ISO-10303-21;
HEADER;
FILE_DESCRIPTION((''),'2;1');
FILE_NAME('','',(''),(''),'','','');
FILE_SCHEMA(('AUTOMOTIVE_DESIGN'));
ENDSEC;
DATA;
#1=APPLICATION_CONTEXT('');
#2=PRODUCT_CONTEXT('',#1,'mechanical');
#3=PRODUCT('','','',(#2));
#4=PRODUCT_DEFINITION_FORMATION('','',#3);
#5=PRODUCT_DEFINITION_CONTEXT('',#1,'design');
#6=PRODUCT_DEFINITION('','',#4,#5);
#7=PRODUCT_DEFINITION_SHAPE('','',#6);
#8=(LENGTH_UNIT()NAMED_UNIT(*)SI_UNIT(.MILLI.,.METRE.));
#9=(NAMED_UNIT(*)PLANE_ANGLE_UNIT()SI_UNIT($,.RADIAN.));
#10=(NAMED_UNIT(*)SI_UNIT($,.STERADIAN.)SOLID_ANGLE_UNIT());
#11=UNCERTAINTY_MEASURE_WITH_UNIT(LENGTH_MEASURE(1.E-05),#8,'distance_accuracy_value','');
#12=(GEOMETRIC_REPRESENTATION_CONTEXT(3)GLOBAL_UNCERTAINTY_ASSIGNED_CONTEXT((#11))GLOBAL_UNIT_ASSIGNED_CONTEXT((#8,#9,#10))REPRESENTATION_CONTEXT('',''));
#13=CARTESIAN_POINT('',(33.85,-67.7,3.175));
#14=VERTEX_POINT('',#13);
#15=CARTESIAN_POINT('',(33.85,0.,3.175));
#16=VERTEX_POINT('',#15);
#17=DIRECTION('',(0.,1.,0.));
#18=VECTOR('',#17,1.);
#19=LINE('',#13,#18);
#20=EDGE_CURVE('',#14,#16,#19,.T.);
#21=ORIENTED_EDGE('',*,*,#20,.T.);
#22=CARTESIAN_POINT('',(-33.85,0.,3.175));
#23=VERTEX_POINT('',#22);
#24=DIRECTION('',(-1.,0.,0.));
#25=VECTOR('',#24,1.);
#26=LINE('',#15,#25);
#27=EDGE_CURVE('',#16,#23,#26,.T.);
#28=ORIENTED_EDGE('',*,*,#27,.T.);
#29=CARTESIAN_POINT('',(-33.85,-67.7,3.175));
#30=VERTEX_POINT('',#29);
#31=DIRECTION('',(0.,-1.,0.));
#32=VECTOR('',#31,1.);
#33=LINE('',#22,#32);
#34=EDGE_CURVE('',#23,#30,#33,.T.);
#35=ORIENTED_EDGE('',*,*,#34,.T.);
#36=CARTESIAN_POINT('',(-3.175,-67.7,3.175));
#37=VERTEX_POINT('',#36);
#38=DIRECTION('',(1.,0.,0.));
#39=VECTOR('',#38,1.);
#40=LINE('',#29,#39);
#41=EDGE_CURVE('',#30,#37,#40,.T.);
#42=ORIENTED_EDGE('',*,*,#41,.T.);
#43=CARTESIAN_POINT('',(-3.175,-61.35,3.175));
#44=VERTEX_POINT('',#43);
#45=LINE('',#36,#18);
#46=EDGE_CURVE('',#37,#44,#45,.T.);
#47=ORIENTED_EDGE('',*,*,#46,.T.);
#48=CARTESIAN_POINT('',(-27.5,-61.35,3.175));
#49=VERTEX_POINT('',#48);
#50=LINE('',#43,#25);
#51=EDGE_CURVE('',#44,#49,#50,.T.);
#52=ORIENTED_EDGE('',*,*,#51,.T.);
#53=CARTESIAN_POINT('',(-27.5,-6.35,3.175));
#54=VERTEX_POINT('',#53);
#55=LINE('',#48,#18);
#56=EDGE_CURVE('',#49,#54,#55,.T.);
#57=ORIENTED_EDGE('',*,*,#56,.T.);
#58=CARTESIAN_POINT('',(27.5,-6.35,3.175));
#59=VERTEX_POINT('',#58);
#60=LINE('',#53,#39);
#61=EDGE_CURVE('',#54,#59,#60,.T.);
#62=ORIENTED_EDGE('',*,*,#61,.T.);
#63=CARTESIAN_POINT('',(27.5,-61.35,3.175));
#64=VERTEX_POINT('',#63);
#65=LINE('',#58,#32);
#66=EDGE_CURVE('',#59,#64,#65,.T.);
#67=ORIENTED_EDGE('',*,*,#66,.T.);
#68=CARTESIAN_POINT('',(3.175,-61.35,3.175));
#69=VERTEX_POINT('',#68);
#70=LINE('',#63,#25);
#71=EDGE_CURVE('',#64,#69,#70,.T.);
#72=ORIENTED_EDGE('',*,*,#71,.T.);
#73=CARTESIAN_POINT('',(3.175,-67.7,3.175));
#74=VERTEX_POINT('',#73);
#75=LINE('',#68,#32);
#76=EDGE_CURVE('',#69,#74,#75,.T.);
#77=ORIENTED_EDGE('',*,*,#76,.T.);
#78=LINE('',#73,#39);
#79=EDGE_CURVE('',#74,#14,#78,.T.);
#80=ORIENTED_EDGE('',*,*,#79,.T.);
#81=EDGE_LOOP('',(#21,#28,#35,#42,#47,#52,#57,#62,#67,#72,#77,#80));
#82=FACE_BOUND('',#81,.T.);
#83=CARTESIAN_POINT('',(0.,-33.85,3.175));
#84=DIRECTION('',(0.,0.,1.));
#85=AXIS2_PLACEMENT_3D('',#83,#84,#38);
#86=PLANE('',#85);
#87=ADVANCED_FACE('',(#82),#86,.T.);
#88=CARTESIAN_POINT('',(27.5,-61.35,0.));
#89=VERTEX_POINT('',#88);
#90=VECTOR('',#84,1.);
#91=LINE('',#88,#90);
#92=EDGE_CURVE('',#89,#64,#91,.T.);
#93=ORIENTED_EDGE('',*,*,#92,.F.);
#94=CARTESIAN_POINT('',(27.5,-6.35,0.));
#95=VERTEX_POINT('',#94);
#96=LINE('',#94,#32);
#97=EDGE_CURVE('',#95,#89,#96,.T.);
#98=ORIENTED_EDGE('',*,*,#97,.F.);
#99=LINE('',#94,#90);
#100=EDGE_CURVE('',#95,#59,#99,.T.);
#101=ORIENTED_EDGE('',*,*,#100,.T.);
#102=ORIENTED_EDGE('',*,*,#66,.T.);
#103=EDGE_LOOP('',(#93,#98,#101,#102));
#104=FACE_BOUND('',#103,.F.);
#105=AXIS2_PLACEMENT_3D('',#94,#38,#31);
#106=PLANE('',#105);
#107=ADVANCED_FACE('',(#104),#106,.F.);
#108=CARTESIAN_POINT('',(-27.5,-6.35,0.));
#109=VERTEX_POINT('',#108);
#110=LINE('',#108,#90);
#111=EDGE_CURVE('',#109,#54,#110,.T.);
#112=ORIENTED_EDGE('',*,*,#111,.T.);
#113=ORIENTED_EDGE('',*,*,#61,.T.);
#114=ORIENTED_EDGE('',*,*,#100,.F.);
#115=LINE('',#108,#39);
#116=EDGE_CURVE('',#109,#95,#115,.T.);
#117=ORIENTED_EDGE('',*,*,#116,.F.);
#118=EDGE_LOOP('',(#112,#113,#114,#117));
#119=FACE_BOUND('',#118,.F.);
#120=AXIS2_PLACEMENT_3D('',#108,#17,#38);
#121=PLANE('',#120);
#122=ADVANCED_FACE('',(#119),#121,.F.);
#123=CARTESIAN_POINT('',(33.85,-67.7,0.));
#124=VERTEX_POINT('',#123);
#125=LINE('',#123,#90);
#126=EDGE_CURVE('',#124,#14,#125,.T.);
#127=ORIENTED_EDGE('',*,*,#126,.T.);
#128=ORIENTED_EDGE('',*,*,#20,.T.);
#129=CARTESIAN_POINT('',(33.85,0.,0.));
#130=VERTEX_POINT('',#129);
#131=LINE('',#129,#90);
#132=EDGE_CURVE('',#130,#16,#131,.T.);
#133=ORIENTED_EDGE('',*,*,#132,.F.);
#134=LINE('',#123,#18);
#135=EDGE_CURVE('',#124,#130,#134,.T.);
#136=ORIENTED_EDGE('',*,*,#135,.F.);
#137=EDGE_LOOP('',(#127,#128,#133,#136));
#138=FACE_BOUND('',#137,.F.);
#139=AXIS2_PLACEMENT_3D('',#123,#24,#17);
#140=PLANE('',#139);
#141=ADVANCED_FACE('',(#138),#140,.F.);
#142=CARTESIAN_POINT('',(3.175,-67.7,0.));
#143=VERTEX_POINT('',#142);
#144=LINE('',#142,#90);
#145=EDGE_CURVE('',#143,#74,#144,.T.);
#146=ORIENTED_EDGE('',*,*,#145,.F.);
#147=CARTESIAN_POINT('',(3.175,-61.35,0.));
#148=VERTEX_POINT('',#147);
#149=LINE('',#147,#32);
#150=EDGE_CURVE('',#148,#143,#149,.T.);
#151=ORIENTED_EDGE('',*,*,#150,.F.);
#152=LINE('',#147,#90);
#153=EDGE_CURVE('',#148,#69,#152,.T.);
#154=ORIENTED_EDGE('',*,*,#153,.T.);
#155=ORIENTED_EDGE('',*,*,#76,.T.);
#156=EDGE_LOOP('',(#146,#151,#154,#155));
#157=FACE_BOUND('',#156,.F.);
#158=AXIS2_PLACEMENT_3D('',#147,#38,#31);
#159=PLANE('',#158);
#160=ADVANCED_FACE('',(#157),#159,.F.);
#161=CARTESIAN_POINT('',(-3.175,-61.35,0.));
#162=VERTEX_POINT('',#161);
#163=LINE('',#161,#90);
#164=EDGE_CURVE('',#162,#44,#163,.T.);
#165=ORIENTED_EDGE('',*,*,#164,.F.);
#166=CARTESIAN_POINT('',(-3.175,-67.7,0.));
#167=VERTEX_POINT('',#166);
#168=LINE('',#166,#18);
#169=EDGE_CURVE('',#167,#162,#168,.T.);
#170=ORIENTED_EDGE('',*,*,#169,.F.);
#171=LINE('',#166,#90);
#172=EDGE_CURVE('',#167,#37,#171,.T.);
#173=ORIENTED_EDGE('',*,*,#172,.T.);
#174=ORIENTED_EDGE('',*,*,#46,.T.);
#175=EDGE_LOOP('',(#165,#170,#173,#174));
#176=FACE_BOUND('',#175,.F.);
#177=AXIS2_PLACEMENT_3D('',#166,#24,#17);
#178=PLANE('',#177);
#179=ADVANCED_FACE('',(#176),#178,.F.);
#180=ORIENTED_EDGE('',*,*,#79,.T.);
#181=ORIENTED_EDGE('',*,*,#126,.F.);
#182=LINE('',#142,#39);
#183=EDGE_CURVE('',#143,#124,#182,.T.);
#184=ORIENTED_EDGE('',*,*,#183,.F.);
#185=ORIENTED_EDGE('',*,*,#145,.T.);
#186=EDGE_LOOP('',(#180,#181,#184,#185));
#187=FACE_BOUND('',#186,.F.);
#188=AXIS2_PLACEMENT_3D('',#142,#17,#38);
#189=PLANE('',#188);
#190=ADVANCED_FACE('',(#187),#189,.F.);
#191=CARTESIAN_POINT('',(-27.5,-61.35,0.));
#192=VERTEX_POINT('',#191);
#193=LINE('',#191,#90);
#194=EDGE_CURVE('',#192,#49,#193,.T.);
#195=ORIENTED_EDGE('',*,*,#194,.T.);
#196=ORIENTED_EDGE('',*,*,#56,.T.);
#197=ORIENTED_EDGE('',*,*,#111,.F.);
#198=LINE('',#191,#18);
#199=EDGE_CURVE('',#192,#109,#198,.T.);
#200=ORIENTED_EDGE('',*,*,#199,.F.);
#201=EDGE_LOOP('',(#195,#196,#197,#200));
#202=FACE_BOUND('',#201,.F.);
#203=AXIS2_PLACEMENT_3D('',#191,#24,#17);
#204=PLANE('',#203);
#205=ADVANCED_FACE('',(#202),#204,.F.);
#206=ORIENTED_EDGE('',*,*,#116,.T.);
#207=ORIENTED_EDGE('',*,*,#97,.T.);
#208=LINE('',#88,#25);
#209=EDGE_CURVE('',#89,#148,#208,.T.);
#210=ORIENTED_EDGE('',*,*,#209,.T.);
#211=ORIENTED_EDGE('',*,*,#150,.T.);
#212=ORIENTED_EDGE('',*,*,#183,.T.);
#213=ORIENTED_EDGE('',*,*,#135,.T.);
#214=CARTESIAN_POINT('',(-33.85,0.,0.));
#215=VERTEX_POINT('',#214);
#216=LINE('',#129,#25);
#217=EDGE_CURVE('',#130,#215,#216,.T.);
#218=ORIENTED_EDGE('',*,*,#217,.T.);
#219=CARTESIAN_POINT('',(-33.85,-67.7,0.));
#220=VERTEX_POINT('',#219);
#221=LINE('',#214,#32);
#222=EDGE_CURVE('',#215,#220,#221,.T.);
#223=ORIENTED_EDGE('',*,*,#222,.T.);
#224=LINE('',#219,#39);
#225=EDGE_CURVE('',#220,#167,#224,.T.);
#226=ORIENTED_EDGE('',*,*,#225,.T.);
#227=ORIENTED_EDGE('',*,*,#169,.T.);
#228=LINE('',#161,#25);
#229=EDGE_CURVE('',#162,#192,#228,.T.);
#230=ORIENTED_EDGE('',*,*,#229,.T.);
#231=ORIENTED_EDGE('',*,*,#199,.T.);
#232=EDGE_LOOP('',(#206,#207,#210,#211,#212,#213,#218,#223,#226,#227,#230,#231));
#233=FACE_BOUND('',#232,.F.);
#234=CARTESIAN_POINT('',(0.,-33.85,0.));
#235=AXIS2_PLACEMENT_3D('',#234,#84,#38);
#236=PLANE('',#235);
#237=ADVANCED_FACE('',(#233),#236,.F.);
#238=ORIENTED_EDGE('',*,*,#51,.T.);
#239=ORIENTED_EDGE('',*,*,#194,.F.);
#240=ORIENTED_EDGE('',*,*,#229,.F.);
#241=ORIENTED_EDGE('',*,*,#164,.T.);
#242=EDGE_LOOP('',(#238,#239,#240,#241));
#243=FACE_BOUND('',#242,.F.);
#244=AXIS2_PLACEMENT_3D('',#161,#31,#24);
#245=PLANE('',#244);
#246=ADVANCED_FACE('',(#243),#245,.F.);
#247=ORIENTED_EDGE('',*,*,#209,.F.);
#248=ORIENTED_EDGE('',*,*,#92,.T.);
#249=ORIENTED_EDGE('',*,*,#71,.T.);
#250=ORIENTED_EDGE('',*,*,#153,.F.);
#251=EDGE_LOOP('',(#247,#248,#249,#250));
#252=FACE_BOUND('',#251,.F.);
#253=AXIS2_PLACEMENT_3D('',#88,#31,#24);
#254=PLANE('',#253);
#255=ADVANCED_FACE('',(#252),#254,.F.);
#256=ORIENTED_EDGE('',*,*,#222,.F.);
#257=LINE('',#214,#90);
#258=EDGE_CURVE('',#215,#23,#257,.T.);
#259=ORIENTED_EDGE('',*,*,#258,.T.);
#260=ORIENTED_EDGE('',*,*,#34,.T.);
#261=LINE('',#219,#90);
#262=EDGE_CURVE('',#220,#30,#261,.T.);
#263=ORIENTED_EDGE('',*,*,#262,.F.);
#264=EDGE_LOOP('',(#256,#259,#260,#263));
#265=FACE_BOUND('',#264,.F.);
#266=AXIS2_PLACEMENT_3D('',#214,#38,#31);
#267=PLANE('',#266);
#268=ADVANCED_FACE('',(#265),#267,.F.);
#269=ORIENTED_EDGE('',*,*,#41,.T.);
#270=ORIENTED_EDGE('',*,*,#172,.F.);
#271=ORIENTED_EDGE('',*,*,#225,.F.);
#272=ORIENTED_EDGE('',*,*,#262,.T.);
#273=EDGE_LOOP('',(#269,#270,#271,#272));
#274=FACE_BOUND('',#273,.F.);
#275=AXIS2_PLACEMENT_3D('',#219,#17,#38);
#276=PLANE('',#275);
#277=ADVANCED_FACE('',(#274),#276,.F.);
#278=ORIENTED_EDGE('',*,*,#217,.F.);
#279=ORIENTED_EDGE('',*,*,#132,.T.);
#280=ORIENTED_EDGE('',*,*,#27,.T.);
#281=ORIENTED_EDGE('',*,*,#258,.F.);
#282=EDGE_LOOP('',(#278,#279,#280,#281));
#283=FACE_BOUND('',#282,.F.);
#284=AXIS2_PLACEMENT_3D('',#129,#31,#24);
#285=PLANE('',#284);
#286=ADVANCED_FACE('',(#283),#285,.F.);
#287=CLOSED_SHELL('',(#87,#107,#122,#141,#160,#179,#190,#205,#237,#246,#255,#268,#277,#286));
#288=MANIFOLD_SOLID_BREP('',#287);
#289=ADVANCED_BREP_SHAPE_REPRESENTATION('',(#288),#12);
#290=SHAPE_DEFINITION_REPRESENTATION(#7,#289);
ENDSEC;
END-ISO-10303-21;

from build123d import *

# Parameters (mm, degrees)
F1_DEPTH = 3.175


# Not quite as in the source:
# - a length typed as a fraction of an inch, garbled in the dataset ("3 / 203.2 mm" for 3/8 in), is restored


with BuildPart() as f1:
    # F0 (on Top) → F1 (new body)
    with BuildSketch(Plane.XY):
        Polygon((33.85, 0), (-33.85, 0), (-33.85, -67.7), (-3.175, -67.7), (-3.175, -61.35), (-27.5, -61.35), (-27.5, -6.35), (27.5, -6.35), (27.5, -61.35), (3.175, -61.35), (3.175, -67.7), (33.85, -67.7), align=None)
    extrude(amount=F1_DEPTH)


solid = f1.part
